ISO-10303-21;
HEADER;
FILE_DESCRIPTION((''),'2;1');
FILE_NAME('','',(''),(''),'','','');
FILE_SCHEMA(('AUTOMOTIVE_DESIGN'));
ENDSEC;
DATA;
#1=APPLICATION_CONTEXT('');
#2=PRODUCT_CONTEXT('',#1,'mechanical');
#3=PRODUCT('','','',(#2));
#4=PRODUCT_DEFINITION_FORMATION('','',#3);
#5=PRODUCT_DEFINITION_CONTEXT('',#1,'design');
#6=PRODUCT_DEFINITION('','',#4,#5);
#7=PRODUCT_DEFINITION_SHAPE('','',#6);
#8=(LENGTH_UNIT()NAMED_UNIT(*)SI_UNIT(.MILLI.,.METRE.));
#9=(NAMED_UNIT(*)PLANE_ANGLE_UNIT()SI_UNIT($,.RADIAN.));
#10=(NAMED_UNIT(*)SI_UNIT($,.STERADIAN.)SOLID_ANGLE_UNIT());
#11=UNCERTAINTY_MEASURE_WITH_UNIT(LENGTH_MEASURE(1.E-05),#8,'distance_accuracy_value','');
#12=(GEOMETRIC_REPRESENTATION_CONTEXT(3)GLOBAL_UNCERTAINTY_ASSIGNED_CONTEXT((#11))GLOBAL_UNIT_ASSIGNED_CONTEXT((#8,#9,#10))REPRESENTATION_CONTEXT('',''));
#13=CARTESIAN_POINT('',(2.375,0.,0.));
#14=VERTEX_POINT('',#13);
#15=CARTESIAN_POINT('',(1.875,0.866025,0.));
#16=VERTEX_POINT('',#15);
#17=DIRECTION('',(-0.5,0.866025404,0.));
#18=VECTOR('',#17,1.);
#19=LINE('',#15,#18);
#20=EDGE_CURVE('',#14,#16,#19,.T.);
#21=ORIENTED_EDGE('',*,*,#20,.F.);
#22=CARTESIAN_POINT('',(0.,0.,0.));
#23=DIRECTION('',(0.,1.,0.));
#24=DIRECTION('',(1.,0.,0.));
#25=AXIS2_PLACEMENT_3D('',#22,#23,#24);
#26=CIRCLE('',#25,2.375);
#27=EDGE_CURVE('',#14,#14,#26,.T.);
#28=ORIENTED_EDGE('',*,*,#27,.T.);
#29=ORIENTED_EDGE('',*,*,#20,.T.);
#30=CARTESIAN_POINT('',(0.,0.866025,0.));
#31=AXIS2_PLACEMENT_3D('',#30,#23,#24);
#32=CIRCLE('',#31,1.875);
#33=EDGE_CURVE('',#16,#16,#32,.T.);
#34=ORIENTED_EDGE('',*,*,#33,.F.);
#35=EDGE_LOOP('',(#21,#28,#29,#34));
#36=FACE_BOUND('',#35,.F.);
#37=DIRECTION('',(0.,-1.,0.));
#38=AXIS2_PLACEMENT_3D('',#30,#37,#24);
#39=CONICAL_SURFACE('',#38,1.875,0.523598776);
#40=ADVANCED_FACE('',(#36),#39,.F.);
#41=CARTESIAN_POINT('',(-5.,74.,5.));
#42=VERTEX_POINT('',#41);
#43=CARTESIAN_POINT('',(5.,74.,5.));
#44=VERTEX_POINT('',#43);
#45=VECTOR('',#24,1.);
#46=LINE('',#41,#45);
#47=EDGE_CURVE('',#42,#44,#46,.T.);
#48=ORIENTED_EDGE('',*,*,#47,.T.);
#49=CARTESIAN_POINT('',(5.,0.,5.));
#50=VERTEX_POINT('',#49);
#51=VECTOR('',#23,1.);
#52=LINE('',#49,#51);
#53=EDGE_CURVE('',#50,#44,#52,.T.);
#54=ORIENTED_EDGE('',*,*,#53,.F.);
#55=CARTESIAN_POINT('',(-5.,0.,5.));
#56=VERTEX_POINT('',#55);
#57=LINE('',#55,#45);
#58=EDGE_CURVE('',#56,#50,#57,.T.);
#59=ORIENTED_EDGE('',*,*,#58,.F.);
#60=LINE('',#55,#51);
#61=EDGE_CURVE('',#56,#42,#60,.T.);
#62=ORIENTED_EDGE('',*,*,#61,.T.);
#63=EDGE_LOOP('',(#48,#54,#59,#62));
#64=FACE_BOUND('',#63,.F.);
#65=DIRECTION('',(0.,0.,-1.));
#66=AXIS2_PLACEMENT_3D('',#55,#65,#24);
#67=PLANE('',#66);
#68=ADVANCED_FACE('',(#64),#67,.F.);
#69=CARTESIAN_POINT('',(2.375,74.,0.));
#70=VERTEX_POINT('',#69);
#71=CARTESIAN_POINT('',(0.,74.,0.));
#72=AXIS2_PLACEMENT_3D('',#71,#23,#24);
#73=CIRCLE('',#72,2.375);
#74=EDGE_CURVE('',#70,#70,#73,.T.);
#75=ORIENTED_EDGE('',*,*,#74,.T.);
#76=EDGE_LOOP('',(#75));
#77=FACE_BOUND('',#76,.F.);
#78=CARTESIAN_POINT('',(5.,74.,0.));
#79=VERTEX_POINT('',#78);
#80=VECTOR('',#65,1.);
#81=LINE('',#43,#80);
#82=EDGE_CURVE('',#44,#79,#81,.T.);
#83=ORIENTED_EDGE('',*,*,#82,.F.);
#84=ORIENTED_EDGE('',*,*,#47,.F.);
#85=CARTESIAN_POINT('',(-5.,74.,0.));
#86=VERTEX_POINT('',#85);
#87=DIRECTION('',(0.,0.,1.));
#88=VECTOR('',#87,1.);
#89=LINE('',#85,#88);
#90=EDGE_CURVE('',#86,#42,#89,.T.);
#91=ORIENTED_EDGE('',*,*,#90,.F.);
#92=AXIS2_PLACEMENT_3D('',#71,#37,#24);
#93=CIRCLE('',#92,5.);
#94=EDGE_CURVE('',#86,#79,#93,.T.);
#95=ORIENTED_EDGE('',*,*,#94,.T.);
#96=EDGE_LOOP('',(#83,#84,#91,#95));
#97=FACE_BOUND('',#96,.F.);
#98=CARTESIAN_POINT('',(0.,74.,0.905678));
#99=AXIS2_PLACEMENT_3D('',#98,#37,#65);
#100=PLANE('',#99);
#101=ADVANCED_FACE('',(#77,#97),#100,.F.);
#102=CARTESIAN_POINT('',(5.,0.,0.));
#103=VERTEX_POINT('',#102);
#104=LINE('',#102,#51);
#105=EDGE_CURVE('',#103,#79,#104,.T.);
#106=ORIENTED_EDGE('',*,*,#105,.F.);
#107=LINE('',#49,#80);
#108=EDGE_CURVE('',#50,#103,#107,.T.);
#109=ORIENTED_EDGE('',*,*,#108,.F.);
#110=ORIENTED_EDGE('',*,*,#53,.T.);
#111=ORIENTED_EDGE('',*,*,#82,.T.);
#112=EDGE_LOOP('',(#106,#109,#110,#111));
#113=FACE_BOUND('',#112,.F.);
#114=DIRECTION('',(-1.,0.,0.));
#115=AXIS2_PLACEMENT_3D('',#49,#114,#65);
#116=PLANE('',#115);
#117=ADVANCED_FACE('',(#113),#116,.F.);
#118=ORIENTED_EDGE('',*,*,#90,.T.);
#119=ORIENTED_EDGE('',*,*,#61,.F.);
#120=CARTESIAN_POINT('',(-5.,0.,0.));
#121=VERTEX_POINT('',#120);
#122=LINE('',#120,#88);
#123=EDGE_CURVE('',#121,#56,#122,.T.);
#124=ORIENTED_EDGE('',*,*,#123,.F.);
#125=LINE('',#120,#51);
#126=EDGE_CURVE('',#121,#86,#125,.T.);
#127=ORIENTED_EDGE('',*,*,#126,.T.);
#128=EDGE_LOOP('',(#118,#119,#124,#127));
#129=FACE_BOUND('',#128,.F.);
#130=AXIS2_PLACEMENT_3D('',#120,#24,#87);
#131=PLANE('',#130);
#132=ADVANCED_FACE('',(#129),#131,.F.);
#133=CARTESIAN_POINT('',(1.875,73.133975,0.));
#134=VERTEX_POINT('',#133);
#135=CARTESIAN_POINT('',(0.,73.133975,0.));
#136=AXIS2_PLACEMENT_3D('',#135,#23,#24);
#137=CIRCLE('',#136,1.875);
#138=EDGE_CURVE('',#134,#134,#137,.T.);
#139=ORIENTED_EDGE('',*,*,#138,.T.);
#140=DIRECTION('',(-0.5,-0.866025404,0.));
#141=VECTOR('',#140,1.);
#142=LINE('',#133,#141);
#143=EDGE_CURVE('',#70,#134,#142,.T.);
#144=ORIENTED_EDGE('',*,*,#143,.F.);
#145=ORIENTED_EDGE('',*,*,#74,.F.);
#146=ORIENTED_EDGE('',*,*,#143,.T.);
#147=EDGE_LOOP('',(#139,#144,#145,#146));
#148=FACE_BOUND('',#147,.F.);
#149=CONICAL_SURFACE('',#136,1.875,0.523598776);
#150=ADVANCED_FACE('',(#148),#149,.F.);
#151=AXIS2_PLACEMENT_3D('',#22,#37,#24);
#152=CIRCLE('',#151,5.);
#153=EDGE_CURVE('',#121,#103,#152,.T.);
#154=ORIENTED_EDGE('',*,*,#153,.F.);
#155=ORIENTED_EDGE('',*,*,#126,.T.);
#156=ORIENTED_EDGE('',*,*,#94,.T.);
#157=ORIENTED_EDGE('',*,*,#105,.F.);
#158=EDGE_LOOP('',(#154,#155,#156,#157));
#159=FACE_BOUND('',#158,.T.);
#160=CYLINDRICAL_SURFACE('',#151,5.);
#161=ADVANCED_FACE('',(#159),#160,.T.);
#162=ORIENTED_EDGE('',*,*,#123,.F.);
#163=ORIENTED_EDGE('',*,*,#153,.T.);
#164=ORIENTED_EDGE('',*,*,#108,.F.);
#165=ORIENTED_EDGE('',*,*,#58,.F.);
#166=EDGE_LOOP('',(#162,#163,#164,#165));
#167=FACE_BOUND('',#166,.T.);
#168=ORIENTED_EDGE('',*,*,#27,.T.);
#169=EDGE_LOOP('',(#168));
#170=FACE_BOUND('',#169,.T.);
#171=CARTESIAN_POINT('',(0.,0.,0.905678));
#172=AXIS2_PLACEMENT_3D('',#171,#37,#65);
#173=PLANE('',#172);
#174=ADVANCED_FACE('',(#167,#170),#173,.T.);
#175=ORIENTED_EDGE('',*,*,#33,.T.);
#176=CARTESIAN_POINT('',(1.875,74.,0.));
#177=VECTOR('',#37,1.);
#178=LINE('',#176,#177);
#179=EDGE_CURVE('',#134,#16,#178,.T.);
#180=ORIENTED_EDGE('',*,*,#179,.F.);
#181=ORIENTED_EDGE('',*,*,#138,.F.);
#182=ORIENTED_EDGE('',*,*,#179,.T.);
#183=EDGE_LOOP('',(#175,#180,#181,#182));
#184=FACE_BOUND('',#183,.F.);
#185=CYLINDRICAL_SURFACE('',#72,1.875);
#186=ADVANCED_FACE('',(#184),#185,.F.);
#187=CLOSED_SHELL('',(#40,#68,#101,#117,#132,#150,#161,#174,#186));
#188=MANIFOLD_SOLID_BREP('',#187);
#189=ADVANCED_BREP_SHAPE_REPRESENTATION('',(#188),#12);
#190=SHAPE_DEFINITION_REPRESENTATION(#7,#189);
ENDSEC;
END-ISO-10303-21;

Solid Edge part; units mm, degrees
sketch "Sketch1" plane through (0, 0, 0) normal (0, -1, 0) x (1, 0, 0)
  arc A0 (-5, 0) -> (5, 0) centre (0, 0) ccw
  line L0 (5, 5) -> (5, 0)
  line L1 (-5, 5) -> (5, 5)
  line L2 (-5, 0) -> (-5, 5)
  dimension "D1" = 5
  dimension "D2" = 5
extrude "Extrusionsausprägung_2" add sketch "Sketch1" against normal blind 74
sketch "Sketch2" plane through (0, 74, 0) normal (0, 1, 0) x (1, 0, 0)
  circle A0 centre (0, 0) radius 1.875
  dimension "D1" = 3.75
extrude "Cutout1" cut sketch "Sketch2" against normal up to next
chamfer "Fase_1" distance 0.5 angle 60 2 edges at (-1.875, 74, 0) (0, 0, 1.875) measured on face at (-3.2333, 0, 3.4333) measured on face at (-3.2333, 74, 3.4333)
properties material "Nylon, allgemein"
